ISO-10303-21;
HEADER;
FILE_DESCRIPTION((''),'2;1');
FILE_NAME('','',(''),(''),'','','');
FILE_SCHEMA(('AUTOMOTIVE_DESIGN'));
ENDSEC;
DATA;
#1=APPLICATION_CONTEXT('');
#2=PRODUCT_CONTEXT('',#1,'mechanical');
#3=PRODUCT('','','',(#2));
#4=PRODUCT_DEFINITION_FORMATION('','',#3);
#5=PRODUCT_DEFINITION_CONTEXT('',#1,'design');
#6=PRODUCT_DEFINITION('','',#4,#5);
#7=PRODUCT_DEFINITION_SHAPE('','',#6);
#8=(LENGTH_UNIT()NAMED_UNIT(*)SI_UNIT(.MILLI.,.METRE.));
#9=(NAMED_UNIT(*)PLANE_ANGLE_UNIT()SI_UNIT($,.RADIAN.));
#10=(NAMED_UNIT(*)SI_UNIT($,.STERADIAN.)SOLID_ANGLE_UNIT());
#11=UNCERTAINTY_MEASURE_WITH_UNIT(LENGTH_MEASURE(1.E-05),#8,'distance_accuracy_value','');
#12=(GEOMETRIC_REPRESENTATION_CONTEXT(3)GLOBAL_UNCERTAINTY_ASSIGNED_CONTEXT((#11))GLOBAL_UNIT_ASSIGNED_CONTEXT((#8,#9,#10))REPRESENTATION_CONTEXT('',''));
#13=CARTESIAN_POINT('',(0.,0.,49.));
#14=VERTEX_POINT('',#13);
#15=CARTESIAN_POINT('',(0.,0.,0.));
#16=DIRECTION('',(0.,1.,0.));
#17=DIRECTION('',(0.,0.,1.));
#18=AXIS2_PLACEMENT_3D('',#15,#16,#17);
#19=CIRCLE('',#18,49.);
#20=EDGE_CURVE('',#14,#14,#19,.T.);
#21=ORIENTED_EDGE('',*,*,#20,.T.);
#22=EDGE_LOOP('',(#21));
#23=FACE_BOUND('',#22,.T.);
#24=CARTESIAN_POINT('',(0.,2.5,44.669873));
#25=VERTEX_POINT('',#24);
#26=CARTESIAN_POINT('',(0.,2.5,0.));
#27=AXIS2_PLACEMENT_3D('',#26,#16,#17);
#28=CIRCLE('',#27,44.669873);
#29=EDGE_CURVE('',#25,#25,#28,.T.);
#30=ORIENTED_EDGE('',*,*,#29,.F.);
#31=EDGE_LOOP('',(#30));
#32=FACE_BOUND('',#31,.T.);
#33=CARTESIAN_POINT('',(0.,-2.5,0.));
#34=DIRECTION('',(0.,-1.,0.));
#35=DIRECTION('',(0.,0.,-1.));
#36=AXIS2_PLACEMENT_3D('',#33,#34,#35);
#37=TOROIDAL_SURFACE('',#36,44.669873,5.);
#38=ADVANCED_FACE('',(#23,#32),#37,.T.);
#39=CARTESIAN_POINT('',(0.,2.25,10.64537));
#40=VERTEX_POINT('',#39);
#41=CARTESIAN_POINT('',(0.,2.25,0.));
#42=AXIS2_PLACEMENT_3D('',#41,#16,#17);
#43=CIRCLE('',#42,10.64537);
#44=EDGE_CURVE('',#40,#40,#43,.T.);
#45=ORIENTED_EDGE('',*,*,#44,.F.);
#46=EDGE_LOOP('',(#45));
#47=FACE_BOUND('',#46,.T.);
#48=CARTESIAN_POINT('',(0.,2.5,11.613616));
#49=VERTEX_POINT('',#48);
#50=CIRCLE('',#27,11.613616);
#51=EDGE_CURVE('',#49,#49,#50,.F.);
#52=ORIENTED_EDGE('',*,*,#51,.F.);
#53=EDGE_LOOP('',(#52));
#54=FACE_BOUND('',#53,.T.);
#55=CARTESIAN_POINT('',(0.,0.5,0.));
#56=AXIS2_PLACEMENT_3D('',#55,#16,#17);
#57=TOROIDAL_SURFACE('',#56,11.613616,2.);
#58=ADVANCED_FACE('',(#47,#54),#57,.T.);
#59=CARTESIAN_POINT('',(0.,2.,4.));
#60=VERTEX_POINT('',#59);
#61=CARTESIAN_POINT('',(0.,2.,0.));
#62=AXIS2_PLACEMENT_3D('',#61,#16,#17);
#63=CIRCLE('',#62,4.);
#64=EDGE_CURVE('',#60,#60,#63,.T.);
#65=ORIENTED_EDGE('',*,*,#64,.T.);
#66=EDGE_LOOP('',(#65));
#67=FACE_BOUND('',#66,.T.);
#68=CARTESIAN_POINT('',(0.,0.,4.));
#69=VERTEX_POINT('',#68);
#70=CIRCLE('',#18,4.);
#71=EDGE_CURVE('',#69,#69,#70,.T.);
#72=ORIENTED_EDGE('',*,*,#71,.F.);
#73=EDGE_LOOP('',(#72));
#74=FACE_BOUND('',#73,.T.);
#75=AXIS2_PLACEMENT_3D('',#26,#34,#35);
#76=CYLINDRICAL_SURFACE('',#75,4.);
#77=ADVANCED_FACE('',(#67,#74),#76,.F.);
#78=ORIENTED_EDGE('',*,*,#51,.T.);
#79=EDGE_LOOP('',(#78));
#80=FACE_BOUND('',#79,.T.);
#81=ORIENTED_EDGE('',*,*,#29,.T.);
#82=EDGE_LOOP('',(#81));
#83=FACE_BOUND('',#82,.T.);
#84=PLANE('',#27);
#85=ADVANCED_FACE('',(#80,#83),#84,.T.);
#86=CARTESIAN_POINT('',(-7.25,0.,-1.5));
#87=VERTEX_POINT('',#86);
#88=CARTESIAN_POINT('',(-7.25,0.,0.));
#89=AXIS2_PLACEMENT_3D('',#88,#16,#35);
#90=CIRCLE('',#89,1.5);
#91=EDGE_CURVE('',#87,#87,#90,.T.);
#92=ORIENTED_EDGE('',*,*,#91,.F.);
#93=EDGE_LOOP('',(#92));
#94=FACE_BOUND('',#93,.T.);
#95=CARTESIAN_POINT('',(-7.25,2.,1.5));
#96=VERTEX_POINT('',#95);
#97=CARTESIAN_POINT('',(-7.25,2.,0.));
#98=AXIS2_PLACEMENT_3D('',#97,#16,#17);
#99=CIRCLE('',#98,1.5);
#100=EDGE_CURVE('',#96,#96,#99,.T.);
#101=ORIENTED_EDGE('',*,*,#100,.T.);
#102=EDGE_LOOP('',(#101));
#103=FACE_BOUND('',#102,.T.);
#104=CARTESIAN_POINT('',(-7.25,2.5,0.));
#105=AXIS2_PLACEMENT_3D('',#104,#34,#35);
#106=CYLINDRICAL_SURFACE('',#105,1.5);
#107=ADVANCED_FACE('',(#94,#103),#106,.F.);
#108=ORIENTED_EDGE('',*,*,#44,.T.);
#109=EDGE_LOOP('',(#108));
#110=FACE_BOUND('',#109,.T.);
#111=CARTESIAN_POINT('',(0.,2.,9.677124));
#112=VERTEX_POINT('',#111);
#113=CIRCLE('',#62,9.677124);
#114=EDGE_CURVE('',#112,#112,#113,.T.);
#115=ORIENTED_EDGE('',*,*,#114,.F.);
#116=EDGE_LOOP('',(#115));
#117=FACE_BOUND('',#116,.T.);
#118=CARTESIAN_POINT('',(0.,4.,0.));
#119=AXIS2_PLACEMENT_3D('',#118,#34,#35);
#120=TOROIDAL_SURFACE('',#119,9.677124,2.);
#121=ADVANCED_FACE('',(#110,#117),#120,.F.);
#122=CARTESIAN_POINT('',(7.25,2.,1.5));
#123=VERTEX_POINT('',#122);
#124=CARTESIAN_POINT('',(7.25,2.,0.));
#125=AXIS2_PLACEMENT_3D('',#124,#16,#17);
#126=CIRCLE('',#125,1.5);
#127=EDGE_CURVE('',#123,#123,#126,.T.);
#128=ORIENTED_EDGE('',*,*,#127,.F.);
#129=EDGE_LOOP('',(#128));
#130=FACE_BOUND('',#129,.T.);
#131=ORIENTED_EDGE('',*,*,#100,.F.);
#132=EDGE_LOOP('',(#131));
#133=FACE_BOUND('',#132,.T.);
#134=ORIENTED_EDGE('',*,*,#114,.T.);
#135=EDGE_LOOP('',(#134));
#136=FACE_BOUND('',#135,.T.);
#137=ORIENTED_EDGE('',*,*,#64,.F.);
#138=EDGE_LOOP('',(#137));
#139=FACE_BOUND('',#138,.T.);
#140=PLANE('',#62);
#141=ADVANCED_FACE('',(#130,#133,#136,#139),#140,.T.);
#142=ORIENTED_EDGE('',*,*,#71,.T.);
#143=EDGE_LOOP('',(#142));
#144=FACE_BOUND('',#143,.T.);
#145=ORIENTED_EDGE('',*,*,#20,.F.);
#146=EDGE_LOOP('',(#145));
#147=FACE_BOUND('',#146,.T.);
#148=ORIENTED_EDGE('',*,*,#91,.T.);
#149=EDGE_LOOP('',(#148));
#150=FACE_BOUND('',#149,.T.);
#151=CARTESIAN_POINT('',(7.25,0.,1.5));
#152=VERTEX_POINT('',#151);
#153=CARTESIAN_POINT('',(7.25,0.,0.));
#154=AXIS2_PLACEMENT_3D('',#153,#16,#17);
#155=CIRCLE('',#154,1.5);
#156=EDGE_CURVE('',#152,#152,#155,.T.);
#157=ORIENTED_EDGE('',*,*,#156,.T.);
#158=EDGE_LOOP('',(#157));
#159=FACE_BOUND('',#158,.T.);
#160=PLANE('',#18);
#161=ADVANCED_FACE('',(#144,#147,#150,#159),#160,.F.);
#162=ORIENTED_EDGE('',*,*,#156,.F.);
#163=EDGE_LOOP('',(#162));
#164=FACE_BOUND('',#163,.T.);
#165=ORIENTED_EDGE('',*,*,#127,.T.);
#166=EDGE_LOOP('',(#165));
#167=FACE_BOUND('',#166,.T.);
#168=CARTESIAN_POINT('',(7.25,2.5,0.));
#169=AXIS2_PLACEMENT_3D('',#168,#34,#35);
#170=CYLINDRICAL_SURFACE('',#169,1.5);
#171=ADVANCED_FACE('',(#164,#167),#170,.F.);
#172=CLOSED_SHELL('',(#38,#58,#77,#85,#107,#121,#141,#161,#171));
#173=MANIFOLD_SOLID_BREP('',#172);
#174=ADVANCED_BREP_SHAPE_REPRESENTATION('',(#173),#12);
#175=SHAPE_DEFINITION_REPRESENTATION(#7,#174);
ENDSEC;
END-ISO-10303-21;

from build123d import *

# Parameters (mm, degrees)
CROQUIS1_R              = 49
CROQUIS1_R_2            = 4
CROQUIS1_R_3            = 1.5
SALIENTE_EXTRUIR1_DEPTH = 2.5
CROQUIS2_R              = 11
CORTAR_EXTRUIR1_DEPTH   = 0.5
REDONDEO1_R             = 2
REDONDEO2_R             = 2
REDONDEO3_R             = 5


with BuildPart() as part:
    # Croquis1 → Saliente-Extruir1 (new body)
    with BuildSketch(Plane(origin=(0, 0, 0), x_dir=(1, 0, 0), z_dir=(0, 1, 0))):
        with Locations(Location((0, 0, 0), (0, 0, 270))):
            Circle(CROQUIS1_R)
        with Locations(Location((0, 0, 0), (0, 0, 270))):
            Circle(CROQUIS1_R_2, mode=Mode.SUBTRACT)
        with Locations(Location((7.25, 0, 0), (0, 0, 270))):
            Circle(CROQUIS1_R_3, mode=Mode.SUBTRACT)
        with Locations(Location((-7.25, 0, 0), (0, 0, 90))):
            Circle(CROQUIS1_R_3, mode=Mode.SUBTRACT)
    extrude(amount=SALIENTE_EXTRUIR1_DEPTH)

    # Croquis2 → Cortar-Extruir1 (cut)
    with BuildSketch(Plane(origin=(0, 2.5, 0), x_dir=(1, 0, 0), z_dir=(0, 1, 0))):
        with Locations(Location((0, 0, 0), (0, 0, 270))):
            Circle(CROQUIS2_R)
    extrude(amount=-CORTAR_EXTRUIR1_DEPTH, mode=Mode.SUBTRACT)

    # Redondeo1
    # the kernel refuses this fillet: 2 mm, written as the material it adds along each edge
    with BuildSketch(Plane(origin=(0, 2, 0), x_dir=(0, 0, 1), z_dir=(-1, 0, 0))) as redondeo1_piece_1:
        with BuildLine():
            CenterArc((9.677124344, 2), REDONDEO1_R, 270, 41.409622109)
            Line((9.677124344, 0), (9.677124344, -0.04))
            Line((9.677124344, -0.04), (11, -0.04))
            Line((11, -0.04), (11.04, 0))
            ThreePointArc((11.04, 0), (11.04, 0.25), (11.026457513, 0.47))
            Line((11.026457513, 0.47), (11, 0.5))
        make_face()
    revolve(axis=Axis((0, 2, 0), (0, 1, 0)))

    # Redondeo2
    redondeo2_edges = [part.edges().sort_by_distance(p)[0] for p in [
        (0, 2.5, -11),
    ]]
    fillet(redondeo2_edges, radius=REDONDEO2_R)

    # Redondeo3
    # the kernel refuses this fillet: 5 mm, written as the material it takes off along each edge
    with BuildSketch(Plane(origin=(0, 2.5, 0), x_dir=(0, 0, 1), z_dir=(-1, 0, 0))) as redondeo3_piece_1:
        with BuildLine():
            CenterArc((44.669872981, -5), REDONDEO3_R, 30, 60)
            Line((49, -2.5), (49.08660254, -2.45))
            ThreePointArc((49.08660254, -2.45), (49.1, -1.25), (49.1, 0))
            Line((49.1, 0), (49, 0.1))
            Line((49, 0.1), (44.669872981, 0.1))
            Line((44.669872981, 0.1), (44.669872981, 0))
        make_face()
    revolve(axis=Axis((0, 2.5, 0), (0, 1, 0)), mode=Mode.SUBTRACT)


solid = part.part
